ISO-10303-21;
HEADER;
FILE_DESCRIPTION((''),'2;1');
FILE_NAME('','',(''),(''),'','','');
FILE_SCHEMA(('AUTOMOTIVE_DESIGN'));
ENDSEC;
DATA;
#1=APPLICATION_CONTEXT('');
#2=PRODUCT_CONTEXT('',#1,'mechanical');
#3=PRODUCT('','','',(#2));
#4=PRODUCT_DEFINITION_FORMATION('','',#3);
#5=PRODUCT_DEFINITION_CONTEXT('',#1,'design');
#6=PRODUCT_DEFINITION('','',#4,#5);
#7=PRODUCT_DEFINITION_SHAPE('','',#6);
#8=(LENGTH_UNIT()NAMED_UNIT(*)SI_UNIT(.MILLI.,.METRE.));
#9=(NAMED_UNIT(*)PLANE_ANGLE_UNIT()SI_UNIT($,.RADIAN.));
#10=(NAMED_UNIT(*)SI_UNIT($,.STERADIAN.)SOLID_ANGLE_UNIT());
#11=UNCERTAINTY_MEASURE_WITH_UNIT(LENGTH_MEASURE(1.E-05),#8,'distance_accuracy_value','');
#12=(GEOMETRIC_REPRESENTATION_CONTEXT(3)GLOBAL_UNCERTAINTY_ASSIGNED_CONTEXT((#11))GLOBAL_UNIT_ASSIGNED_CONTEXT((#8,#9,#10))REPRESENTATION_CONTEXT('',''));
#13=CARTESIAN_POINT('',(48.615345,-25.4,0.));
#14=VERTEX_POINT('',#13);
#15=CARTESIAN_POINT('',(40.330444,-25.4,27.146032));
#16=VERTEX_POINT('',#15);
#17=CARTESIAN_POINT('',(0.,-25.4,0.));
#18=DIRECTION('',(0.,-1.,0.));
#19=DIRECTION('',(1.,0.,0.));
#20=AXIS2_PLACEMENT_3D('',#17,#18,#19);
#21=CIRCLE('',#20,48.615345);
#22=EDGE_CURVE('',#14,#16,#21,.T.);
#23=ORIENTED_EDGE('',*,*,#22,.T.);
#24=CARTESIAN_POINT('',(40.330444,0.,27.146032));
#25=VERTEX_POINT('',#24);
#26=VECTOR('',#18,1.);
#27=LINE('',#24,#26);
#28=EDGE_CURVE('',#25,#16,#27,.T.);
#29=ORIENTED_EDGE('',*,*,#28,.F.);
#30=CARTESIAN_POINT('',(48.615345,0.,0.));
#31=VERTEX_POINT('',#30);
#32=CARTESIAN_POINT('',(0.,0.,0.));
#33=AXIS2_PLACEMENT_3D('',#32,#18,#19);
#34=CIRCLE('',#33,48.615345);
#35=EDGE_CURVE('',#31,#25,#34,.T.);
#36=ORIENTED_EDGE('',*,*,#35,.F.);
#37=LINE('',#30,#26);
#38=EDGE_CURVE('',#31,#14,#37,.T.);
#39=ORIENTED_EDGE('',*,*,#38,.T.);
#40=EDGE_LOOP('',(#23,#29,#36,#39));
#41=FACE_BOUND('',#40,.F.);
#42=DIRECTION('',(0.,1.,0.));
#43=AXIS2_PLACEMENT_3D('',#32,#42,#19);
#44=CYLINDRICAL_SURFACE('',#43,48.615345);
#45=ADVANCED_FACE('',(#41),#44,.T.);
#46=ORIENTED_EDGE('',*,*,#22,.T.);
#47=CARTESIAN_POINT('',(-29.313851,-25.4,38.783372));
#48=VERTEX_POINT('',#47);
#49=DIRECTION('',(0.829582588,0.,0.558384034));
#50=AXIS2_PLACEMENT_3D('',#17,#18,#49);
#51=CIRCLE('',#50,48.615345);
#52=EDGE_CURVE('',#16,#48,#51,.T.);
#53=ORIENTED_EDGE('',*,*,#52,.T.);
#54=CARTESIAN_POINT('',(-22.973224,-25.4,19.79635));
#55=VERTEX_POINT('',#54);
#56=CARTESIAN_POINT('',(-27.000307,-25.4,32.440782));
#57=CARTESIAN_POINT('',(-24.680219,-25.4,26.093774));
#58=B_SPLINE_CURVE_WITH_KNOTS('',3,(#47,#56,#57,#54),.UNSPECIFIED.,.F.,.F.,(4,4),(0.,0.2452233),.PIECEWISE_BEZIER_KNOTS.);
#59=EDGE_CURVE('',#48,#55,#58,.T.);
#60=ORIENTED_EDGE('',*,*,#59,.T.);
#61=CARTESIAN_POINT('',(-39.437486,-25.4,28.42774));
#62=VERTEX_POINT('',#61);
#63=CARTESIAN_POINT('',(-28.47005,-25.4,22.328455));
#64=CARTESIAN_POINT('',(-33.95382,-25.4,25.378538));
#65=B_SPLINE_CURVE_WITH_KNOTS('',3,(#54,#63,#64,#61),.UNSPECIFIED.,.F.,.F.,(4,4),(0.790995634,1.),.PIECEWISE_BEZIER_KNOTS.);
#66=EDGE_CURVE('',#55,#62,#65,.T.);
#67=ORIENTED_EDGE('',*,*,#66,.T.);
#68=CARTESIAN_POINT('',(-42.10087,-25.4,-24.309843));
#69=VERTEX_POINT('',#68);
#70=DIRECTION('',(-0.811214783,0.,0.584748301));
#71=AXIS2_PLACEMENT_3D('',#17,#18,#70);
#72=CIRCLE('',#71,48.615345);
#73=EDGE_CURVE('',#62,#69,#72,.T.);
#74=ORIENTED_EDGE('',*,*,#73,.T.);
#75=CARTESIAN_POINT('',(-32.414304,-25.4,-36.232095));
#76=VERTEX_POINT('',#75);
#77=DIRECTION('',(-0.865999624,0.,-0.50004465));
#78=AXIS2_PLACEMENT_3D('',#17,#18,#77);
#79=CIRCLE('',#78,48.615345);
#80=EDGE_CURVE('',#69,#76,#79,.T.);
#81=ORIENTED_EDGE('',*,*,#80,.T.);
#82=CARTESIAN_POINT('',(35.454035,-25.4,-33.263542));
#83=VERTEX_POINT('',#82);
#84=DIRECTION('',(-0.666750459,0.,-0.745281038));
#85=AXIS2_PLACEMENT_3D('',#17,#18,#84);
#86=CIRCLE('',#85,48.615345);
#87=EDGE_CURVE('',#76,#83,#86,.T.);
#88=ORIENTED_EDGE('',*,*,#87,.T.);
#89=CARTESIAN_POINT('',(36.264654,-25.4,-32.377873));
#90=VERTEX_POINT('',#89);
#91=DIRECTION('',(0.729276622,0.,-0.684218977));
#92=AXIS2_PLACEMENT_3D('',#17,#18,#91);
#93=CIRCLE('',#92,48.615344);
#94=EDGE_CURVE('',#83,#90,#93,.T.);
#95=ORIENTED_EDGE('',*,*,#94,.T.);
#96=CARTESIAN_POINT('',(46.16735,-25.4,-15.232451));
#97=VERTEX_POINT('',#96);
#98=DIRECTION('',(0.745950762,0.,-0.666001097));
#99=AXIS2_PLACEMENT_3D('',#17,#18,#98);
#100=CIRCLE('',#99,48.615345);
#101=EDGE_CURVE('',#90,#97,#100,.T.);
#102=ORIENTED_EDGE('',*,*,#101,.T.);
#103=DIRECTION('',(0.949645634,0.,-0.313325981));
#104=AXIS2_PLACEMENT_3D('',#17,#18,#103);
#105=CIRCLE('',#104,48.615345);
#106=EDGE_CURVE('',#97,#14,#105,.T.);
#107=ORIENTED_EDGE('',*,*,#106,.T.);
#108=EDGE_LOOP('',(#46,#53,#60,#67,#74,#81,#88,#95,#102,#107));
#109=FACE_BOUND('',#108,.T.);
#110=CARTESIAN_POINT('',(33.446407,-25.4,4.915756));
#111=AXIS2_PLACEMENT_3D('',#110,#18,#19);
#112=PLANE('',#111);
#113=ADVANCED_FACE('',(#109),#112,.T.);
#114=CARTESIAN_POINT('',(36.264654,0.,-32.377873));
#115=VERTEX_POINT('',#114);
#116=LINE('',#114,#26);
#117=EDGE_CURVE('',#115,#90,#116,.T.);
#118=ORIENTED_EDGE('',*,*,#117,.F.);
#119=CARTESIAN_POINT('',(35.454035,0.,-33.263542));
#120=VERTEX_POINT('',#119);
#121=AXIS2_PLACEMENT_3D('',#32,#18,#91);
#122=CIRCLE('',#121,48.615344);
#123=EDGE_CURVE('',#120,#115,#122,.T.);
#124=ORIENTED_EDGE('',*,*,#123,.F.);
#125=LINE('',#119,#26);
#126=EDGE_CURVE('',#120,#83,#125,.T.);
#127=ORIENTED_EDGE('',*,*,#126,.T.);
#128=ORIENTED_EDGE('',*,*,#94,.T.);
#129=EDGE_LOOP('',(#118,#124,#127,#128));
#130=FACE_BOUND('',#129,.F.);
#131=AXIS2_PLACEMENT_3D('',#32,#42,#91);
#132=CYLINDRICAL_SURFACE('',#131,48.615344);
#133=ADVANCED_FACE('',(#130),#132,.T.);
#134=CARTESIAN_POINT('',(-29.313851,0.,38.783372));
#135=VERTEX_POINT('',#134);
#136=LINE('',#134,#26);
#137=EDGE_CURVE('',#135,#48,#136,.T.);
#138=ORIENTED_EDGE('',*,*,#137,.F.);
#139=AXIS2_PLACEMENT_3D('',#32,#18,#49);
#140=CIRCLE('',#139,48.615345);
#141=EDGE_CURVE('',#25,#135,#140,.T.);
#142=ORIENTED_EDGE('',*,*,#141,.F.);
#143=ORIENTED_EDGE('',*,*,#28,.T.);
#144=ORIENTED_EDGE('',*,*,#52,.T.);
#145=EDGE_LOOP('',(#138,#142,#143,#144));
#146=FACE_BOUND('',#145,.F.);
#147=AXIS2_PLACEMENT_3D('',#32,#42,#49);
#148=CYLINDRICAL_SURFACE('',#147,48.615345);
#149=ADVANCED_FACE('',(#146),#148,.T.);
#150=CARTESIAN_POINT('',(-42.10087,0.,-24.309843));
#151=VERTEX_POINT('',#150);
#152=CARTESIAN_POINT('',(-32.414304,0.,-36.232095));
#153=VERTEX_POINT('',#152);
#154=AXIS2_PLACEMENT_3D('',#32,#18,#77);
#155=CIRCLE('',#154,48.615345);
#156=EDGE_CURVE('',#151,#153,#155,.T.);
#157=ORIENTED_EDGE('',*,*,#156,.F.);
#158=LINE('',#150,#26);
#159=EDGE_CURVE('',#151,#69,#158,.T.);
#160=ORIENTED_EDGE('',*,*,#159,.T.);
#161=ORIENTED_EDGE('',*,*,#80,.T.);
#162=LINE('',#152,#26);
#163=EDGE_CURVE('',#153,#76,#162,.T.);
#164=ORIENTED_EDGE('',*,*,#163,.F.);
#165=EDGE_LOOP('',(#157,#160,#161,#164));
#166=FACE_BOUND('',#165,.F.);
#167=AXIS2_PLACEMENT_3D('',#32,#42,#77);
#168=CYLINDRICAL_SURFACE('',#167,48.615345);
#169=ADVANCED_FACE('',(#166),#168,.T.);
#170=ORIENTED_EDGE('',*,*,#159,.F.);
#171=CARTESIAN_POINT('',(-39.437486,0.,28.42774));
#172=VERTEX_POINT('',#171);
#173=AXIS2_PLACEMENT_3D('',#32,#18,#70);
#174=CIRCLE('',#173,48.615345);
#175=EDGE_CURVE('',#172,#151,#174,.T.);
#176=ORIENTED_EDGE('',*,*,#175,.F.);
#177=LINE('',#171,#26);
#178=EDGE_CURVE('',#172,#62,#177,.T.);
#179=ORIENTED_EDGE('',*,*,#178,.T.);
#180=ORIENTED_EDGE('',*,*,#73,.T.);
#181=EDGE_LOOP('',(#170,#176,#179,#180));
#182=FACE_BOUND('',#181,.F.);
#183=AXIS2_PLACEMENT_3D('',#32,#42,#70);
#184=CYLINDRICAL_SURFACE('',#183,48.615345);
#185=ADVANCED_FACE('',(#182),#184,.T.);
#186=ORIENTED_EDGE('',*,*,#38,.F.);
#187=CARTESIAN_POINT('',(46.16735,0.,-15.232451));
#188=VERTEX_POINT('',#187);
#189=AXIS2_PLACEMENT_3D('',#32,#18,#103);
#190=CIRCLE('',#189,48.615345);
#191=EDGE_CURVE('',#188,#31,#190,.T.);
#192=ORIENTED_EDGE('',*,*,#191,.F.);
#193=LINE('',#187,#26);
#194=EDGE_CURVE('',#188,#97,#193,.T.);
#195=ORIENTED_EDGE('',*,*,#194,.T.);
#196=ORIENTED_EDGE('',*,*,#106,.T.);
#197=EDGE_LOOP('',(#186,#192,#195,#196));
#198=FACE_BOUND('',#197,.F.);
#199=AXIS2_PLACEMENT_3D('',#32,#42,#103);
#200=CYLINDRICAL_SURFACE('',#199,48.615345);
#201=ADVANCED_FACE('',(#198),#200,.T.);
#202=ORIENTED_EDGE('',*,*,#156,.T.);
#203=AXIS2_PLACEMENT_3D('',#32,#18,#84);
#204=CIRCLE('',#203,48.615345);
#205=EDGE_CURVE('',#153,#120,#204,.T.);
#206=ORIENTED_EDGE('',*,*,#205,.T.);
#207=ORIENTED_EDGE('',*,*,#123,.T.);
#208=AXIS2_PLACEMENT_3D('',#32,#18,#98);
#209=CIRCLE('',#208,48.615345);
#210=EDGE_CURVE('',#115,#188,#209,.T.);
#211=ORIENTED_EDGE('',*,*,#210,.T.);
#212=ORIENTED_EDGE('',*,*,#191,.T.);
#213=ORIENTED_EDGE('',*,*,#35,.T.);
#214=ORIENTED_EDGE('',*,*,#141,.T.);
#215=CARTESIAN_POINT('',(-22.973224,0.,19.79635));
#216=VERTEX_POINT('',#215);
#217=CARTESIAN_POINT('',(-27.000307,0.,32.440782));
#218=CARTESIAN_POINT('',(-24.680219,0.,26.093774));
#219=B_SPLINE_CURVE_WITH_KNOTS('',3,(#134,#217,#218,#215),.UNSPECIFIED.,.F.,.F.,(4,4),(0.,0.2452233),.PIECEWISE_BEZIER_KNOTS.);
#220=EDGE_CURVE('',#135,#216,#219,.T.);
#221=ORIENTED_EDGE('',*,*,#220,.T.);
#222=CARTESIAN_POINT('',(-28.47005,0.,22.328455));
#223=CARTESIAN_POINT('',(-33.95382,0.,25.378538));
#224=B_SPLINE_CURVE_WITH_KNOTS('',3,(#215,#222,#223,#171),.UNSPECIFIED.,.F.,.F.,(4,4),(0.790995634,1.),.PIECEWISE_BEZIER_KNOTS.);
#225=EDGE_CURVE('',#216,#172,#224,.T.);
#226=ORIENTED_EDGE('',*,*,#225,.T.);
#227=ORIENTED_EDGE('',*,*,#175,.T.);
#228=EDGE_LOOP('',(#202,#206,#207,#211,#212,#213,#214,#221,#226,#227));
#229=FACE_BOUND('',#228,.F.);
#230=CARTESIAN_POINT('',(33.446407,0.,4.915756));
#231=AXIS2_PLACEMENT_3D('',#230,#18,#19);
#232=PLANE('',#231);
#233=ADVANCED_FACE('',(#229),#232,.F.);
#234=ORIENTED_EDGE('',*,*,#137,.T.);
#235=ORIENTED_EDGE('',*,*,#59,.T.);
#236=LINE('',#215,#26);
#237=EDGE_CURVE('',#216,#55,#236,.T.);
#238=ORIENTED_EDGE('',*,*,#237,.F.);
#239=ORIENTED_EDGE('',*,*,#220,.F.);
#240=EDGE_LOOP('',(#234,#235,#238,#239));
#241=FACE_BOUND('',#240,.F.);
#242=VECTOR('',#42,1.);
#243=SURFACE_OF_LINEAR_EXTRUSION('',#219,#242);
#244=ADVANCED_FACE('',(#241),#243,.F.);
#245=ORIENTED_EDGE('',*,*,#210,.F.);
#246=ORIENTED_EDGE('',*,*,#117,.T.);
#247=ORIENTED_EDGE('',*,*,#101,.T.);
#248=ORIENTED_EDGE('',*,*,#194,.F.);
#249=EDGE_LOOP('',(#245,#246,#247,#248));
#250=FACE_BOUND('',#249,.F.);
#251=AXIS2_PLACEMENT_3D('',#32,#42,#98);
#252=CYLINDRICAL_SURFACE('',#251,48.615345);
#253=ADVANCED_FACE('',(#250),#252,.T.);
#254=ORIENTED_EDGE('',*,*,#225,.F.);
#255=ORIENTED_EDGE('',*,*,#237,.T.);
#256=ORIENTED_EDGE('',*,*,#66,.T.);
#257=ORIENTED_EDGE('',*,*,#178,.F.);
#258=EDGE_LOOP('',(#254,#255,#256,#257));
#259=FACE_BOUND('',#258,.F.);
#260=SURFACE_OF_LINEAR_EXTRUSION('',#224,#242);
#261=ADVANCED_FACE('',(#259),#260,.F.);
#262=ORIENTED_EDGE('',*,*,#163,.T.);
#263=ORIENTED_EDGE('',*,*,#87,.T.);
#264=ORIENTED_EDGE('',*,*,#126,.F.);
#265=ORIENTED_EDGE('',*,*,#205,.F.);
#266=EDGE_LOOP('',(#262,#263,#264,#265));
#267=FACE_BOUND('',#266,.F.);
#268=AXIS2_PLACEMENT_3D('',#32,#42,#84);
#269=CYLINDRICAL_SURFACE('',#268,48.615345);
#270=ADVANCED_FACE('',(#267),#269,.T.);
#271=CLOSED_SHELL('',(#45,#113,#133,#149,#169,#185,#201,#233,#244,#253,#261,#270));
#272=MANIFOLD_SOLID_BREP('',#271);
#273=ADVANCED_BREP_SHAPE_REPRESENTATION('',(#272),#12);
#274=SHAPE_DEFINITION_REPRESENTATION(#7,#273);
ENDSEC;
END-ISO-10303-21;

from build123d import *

# Parameters (mm, degrees)
F1_DEPTH = 25.4


with BuildPart() as f1:
    # F0 (on Front) → F1 (new body)
    with BuildSketch(Plane.XZ):
        with BuildLine():
            ThreePointArc((46.1673500078, -15.2324506451), (47.999444804, -7.7139521587), (48.6153448964, 0))
            ThreePointArc((48.6153448964, 0), (46.4980117159, 14.1910769804), (40.3304436459, 27.1460323938))
            add(Edge.make_bspline(
                [(40.3304436459, 27.1460323938), (32.3786976376, 23.0993060038), (24.4227156617, 19.0482632148), (16.5014874139, 16.4513327342)],
                knots=[0, 0, 0, 0, 0.2953409121, 0.2953409121, 0.2953409121, 0.2953409121], degree=3))
            add(Edge.make_bspline(
                [(16.5014873898, 16.4513327474), (15.5953694896, 11.2931775522), (15.5320066906, 3.0058951007), (18.67748395, -6.2871122776), (19.9799499764, -9.4342211392)],
                knots=[0.2963486373, 0.2963486373, 0.2963486373, 0.2963486373, 0.4715656378, 0.5637333, 0.5637333, 0.5637333, 0.5637333], degree=3))
            add(Edge.make_bspline(
                [(46.1673500078, -15.2324506451), (37.3947505843, -12.9712227578), (28.6158550244, -10.7067465721), (19.9799499764, -9.4342211392)],
                knots=[0, 0, 0, 0, 0.282903213, 0.282903213, 0.282903213, 0.282903213], degree=3))
        make_face()
        with BuildLine():
            add(Edge.make_bspline(
                [(40.3304436459, 27.1460323938), (32.3786976376, 23.0993060038), (24.4227156617, 19.0482632148), (16.5014874139, 16.4513327342)],
                knots=[0, 0, 0, 0, 0.2953409121, 0.2953409121, 0.2953409121, 0.2953409121], degree=3))
            ThreePointArc((40.3304436459, 27.1460323938), (33.903902399, 34.84217504), (26.0352353751, 41.056281838))
            add(Edge.make_bspline(
                [(26.0352353751, 41.056281838), (22.0398072792, 33.1200566973), (18.0340259226, 25.1754420421), (16.5014873898, 16.4513327474)],
                knots=[0, 0, 0, 0, 0.2963486373, 0.2963486373, 0.2963486373, 0.2963486373], degree=3))
        make_face()
        with BuildLine():
            ThreePointArc((36.2646535731, -32.3778730095), (42.0981018646, -24.3146371306), (46.1673500078, -15.2324506451))
            add(Edge.make_bspline(
                [(46.1673500078, -15.2324506451), (37.3947505843, -12.9712227578), (28.6158550244, -10.7067465721), (19.9799499764, -9.4342211392)],
                knots=[0, 0, 0, 0, 0.282903213, 0.282903213, 0.282903213, 0.282903213], degree=3))
            add(Edge.make_bspline(
                [(19.9799499764, -9.4342211392), (25.0191791568, -21.6103566301), (33.3249337281, -32.9452793274), (35.454034531, -33.2635415263)],
                knots=[0.5637333, 0.5637333, 0.5637333, 0.5637333, 0.9203291446, 0.9203291446, 0.9203291446, 0.9203291446], degree=3))
            ThreePointArc((35.454034531, -33.2635415263), (35.8620782725, -32.823209797), (36.2646535731, -32.3778730095))
        make_face()
        with BuildLine():
            add(Edge.make_bspline(
                [(26.0352353751, 41.056281838), (22.0398072792, 33.1200566973), (18.0340259226, 25.1754420421), (16.5014873898, 16.4513327474)],
                knots=[0, 0, 0, 0, 0.2963486373, 0.2963486373, 0.2963486373, 0.2963486373], degree=3))
            ThreePointArc((26.0352353751, 41.056281838), (-1.9947078477, 48.5744058121), (-29.3138505417, 38.7833717695))
            add(Edge.make_bspline(
                [(-29.3138505417, 38.7833717695), (-27.000307279, 32.4407823134), (-24.6802191732, 26.0937743503), (-22.973223534, 19.7963497545)],
                knots=[0, 0, 0, 0, 0.2452233004, 0.2452233004, 0.2452233004, 0.2452233004], degree=3))
            add(Edge.make_bspline(
                [(16.5014874139, 16.4513327342), (10.9797013124, 14.6410459723), (-2.2734109483, 11.9838999083), (-15.3520884673, 16.285685391), (-22.973223534, 19.7963497545)],
                knots=[0.2953409121, 0.2953409121, 0.2953409121, 0.2953409121, 0.5012192547, 0.7909956335, 0.7909956335, 0.7909956335, 0.7909956335], degree=3))
        make_face()
        with BuildLine():
            add(Edge.make_bspline(
                [(16.5014873898, 16.4513327474), (15.5953694896, 11.2931775522), (15.5320066906, 3.0058951007), (18.67748395, -6.2871122776), (19.9799499764, -9.4342211392)],
                knots=[0.2963486373, 0.2963486373, 0.2963486373, 0.2963486373, 0.4715656378, 0.5637333, 0.5637333, 0.5637333, 0.5637333], degree=3))
            add(Edge.make_bspline(
                [(16.5014874139, 16.4513327342), (10.9797013124, 14.6410459723), (-2.2734109483, 11.9838999083), (-15.3520884673, 16.285685391), (-22.973223534, 19.7963497545)],
                knots=[0.2953409121, 0.2953409121, 0.2953409121, 0.2953409121, 0.5012192547, 0.7909956335, 0.7909956335, 0.7909956335, 0.7909956335], degree=3))
            add(Edge.make_bspline(
                [(-22.973223534, 19.7963497545), (-21.1636232806, 13.1203976417), (-19.1493739324, 1.2205893586), (-21.7464907751, -10.2913075482), (-23.4240943414, -15.3533007473)],
                knots=[0.2452233004, 0.2452233004, 0.2452233004, 0.2452233004, 0.5051865577, 0.7125051709, 0.7125051709, 0.7125051709, 0.7125051709], degree=3))
            add(Edge.make_bspline(
                [(19.9799499764, -9.4342211392), (13.2080472289, -8.4363618033), (-1.6767781675, -7.5725154611), (-15.7685768428, -12.1133609217), (-23.4240943551, -15.3533007369)],
                knots=[0.282903213, 0.282903213, 0.282903213, 0.282903213, 0.5047436611, 0.776928854, 0.776928854, 0.776928854, 0.776928854], degree=3))
        make_face()
        with BuildLine():
            add(Edge.make_bspline(
                [(19.9799499764, -9.4342211392), (25.0191791568, -21.6103566301), (33.3249337281, -32.9452793274), (35.454034531, -33.2635415263)],
                knots=[0.5637333, 0.5637333, 0.5637333, 0.5637333, 0.9203291446, 0.9203291446, 0.9203291446, 0.9203291446], degree=3))
            add(Edge.make_bspline(
                [(19.9799499764, -9.4342211392), (13.2080472289, -8.4363618033), (-1.6767781675, -7.5725154611), (-15.7685768428, -12.1133609217), (-23.4240943551, -15.3533007369)],
                knots=[0.282903213, 0.282903213, 0.282903213, 0.282903213, 0.5047436611, 0.776928854, 0.776928854, 0.776928854, 0.776928854], degree=3))
            add(Edge.make_bspline(
                [(-23.4240943414, -15.3533007473), (-25.7504766345, -22.3729158592), (-29.0871025112, -29.3050684982), (-32.4143035176, -36.2320947071)],
                knots=[0.7125051709, 0.7125051709, 0.7125051709, 0.7125051709, 1, 1, 1, 1], degree=3))
            ThreePointArc((-32.4143035176, -36.2320947071), (2.1243983043, -48.5689066301), (35.454034531, -33.2635415263))
        make_face()
        with BuildLine():
            add(Edge.make_bspline(
                [(-22.973223534, 19.7963497545), (-21.1636232806, 13.1203976417), (-19.1493739324, 1.2205893586), (-21.7464907751, -10.2913075482), (-23.4240943414, -15.3533007473)],
                knots=[0.2452233004, 0.2452233004, 0.2452233004, 0.2452233004, 0.5051865577, 0.7125051709, 0.7125051709, 0.7125051709, 0.7125051709], degree=3))
            add(Edge.make_bspline(
                [(-22.973223534, 19.7963497545), (-28.4700501333, 22.3284546294), (-33.9538200156, 25.3785378793), (-39.4374864795, 28.4277403178)],
                knots=[0.7909956335, 0.7909956335, 0.7909956335, 0.7909956335, 1, 1, 1, 1], degree=3))
            ThreePointArc((-39.4374864795, 28.4277403178), (-48.5534662677, 2.4520752004), (-42.1008703821, -24.3098431189))
            add(Edge.make_bspline(
                [(-23.4240943551, -15.3533007369), (-29.6982235487, -18.0086144957), (-35.899537129, -21.1597200741), (-42.1008703821, -24.3098431189)],
                knots=[0.776928854, 0.776928854, 0.776928854, 0.776928854, 1, 1, 1, 1], degree=3))
        make_face()
        with BuildLine():
            add(Edge.make_bspline(
                [(-23.4240943414, -15.3533007473), (-25.7504766345, -22.3729158592), (-29.0871025112, -29.3050684982), (-32.4143035176, -36.2320947071)],
                knots=[0.7125051709, 0.7125051709, 0.7125051709, 0.7125051709, 1, 1, 1, 1], degree=3))
            add(Edge.make_bspline(
                [(-23.4240943551, -15.3533007369), (-29.6982235487, -18.0086144957), (-35.899537129, -21.1597200741), (-42.1008703821, -24.3098431189)],
                knots=[0.776928854, 0.776928854, 0.776928854, 0.776928854, 1, 1, 1, 1], degree=3))
            ThreePointArc((-42.1008703821, -24.3098431189), (-37.731456453, -30.6559774487), (-32.4143035176, -36.2320947071))
        make_face()
    extrude(amount=F1_DEPTH)


solid = f1.part
